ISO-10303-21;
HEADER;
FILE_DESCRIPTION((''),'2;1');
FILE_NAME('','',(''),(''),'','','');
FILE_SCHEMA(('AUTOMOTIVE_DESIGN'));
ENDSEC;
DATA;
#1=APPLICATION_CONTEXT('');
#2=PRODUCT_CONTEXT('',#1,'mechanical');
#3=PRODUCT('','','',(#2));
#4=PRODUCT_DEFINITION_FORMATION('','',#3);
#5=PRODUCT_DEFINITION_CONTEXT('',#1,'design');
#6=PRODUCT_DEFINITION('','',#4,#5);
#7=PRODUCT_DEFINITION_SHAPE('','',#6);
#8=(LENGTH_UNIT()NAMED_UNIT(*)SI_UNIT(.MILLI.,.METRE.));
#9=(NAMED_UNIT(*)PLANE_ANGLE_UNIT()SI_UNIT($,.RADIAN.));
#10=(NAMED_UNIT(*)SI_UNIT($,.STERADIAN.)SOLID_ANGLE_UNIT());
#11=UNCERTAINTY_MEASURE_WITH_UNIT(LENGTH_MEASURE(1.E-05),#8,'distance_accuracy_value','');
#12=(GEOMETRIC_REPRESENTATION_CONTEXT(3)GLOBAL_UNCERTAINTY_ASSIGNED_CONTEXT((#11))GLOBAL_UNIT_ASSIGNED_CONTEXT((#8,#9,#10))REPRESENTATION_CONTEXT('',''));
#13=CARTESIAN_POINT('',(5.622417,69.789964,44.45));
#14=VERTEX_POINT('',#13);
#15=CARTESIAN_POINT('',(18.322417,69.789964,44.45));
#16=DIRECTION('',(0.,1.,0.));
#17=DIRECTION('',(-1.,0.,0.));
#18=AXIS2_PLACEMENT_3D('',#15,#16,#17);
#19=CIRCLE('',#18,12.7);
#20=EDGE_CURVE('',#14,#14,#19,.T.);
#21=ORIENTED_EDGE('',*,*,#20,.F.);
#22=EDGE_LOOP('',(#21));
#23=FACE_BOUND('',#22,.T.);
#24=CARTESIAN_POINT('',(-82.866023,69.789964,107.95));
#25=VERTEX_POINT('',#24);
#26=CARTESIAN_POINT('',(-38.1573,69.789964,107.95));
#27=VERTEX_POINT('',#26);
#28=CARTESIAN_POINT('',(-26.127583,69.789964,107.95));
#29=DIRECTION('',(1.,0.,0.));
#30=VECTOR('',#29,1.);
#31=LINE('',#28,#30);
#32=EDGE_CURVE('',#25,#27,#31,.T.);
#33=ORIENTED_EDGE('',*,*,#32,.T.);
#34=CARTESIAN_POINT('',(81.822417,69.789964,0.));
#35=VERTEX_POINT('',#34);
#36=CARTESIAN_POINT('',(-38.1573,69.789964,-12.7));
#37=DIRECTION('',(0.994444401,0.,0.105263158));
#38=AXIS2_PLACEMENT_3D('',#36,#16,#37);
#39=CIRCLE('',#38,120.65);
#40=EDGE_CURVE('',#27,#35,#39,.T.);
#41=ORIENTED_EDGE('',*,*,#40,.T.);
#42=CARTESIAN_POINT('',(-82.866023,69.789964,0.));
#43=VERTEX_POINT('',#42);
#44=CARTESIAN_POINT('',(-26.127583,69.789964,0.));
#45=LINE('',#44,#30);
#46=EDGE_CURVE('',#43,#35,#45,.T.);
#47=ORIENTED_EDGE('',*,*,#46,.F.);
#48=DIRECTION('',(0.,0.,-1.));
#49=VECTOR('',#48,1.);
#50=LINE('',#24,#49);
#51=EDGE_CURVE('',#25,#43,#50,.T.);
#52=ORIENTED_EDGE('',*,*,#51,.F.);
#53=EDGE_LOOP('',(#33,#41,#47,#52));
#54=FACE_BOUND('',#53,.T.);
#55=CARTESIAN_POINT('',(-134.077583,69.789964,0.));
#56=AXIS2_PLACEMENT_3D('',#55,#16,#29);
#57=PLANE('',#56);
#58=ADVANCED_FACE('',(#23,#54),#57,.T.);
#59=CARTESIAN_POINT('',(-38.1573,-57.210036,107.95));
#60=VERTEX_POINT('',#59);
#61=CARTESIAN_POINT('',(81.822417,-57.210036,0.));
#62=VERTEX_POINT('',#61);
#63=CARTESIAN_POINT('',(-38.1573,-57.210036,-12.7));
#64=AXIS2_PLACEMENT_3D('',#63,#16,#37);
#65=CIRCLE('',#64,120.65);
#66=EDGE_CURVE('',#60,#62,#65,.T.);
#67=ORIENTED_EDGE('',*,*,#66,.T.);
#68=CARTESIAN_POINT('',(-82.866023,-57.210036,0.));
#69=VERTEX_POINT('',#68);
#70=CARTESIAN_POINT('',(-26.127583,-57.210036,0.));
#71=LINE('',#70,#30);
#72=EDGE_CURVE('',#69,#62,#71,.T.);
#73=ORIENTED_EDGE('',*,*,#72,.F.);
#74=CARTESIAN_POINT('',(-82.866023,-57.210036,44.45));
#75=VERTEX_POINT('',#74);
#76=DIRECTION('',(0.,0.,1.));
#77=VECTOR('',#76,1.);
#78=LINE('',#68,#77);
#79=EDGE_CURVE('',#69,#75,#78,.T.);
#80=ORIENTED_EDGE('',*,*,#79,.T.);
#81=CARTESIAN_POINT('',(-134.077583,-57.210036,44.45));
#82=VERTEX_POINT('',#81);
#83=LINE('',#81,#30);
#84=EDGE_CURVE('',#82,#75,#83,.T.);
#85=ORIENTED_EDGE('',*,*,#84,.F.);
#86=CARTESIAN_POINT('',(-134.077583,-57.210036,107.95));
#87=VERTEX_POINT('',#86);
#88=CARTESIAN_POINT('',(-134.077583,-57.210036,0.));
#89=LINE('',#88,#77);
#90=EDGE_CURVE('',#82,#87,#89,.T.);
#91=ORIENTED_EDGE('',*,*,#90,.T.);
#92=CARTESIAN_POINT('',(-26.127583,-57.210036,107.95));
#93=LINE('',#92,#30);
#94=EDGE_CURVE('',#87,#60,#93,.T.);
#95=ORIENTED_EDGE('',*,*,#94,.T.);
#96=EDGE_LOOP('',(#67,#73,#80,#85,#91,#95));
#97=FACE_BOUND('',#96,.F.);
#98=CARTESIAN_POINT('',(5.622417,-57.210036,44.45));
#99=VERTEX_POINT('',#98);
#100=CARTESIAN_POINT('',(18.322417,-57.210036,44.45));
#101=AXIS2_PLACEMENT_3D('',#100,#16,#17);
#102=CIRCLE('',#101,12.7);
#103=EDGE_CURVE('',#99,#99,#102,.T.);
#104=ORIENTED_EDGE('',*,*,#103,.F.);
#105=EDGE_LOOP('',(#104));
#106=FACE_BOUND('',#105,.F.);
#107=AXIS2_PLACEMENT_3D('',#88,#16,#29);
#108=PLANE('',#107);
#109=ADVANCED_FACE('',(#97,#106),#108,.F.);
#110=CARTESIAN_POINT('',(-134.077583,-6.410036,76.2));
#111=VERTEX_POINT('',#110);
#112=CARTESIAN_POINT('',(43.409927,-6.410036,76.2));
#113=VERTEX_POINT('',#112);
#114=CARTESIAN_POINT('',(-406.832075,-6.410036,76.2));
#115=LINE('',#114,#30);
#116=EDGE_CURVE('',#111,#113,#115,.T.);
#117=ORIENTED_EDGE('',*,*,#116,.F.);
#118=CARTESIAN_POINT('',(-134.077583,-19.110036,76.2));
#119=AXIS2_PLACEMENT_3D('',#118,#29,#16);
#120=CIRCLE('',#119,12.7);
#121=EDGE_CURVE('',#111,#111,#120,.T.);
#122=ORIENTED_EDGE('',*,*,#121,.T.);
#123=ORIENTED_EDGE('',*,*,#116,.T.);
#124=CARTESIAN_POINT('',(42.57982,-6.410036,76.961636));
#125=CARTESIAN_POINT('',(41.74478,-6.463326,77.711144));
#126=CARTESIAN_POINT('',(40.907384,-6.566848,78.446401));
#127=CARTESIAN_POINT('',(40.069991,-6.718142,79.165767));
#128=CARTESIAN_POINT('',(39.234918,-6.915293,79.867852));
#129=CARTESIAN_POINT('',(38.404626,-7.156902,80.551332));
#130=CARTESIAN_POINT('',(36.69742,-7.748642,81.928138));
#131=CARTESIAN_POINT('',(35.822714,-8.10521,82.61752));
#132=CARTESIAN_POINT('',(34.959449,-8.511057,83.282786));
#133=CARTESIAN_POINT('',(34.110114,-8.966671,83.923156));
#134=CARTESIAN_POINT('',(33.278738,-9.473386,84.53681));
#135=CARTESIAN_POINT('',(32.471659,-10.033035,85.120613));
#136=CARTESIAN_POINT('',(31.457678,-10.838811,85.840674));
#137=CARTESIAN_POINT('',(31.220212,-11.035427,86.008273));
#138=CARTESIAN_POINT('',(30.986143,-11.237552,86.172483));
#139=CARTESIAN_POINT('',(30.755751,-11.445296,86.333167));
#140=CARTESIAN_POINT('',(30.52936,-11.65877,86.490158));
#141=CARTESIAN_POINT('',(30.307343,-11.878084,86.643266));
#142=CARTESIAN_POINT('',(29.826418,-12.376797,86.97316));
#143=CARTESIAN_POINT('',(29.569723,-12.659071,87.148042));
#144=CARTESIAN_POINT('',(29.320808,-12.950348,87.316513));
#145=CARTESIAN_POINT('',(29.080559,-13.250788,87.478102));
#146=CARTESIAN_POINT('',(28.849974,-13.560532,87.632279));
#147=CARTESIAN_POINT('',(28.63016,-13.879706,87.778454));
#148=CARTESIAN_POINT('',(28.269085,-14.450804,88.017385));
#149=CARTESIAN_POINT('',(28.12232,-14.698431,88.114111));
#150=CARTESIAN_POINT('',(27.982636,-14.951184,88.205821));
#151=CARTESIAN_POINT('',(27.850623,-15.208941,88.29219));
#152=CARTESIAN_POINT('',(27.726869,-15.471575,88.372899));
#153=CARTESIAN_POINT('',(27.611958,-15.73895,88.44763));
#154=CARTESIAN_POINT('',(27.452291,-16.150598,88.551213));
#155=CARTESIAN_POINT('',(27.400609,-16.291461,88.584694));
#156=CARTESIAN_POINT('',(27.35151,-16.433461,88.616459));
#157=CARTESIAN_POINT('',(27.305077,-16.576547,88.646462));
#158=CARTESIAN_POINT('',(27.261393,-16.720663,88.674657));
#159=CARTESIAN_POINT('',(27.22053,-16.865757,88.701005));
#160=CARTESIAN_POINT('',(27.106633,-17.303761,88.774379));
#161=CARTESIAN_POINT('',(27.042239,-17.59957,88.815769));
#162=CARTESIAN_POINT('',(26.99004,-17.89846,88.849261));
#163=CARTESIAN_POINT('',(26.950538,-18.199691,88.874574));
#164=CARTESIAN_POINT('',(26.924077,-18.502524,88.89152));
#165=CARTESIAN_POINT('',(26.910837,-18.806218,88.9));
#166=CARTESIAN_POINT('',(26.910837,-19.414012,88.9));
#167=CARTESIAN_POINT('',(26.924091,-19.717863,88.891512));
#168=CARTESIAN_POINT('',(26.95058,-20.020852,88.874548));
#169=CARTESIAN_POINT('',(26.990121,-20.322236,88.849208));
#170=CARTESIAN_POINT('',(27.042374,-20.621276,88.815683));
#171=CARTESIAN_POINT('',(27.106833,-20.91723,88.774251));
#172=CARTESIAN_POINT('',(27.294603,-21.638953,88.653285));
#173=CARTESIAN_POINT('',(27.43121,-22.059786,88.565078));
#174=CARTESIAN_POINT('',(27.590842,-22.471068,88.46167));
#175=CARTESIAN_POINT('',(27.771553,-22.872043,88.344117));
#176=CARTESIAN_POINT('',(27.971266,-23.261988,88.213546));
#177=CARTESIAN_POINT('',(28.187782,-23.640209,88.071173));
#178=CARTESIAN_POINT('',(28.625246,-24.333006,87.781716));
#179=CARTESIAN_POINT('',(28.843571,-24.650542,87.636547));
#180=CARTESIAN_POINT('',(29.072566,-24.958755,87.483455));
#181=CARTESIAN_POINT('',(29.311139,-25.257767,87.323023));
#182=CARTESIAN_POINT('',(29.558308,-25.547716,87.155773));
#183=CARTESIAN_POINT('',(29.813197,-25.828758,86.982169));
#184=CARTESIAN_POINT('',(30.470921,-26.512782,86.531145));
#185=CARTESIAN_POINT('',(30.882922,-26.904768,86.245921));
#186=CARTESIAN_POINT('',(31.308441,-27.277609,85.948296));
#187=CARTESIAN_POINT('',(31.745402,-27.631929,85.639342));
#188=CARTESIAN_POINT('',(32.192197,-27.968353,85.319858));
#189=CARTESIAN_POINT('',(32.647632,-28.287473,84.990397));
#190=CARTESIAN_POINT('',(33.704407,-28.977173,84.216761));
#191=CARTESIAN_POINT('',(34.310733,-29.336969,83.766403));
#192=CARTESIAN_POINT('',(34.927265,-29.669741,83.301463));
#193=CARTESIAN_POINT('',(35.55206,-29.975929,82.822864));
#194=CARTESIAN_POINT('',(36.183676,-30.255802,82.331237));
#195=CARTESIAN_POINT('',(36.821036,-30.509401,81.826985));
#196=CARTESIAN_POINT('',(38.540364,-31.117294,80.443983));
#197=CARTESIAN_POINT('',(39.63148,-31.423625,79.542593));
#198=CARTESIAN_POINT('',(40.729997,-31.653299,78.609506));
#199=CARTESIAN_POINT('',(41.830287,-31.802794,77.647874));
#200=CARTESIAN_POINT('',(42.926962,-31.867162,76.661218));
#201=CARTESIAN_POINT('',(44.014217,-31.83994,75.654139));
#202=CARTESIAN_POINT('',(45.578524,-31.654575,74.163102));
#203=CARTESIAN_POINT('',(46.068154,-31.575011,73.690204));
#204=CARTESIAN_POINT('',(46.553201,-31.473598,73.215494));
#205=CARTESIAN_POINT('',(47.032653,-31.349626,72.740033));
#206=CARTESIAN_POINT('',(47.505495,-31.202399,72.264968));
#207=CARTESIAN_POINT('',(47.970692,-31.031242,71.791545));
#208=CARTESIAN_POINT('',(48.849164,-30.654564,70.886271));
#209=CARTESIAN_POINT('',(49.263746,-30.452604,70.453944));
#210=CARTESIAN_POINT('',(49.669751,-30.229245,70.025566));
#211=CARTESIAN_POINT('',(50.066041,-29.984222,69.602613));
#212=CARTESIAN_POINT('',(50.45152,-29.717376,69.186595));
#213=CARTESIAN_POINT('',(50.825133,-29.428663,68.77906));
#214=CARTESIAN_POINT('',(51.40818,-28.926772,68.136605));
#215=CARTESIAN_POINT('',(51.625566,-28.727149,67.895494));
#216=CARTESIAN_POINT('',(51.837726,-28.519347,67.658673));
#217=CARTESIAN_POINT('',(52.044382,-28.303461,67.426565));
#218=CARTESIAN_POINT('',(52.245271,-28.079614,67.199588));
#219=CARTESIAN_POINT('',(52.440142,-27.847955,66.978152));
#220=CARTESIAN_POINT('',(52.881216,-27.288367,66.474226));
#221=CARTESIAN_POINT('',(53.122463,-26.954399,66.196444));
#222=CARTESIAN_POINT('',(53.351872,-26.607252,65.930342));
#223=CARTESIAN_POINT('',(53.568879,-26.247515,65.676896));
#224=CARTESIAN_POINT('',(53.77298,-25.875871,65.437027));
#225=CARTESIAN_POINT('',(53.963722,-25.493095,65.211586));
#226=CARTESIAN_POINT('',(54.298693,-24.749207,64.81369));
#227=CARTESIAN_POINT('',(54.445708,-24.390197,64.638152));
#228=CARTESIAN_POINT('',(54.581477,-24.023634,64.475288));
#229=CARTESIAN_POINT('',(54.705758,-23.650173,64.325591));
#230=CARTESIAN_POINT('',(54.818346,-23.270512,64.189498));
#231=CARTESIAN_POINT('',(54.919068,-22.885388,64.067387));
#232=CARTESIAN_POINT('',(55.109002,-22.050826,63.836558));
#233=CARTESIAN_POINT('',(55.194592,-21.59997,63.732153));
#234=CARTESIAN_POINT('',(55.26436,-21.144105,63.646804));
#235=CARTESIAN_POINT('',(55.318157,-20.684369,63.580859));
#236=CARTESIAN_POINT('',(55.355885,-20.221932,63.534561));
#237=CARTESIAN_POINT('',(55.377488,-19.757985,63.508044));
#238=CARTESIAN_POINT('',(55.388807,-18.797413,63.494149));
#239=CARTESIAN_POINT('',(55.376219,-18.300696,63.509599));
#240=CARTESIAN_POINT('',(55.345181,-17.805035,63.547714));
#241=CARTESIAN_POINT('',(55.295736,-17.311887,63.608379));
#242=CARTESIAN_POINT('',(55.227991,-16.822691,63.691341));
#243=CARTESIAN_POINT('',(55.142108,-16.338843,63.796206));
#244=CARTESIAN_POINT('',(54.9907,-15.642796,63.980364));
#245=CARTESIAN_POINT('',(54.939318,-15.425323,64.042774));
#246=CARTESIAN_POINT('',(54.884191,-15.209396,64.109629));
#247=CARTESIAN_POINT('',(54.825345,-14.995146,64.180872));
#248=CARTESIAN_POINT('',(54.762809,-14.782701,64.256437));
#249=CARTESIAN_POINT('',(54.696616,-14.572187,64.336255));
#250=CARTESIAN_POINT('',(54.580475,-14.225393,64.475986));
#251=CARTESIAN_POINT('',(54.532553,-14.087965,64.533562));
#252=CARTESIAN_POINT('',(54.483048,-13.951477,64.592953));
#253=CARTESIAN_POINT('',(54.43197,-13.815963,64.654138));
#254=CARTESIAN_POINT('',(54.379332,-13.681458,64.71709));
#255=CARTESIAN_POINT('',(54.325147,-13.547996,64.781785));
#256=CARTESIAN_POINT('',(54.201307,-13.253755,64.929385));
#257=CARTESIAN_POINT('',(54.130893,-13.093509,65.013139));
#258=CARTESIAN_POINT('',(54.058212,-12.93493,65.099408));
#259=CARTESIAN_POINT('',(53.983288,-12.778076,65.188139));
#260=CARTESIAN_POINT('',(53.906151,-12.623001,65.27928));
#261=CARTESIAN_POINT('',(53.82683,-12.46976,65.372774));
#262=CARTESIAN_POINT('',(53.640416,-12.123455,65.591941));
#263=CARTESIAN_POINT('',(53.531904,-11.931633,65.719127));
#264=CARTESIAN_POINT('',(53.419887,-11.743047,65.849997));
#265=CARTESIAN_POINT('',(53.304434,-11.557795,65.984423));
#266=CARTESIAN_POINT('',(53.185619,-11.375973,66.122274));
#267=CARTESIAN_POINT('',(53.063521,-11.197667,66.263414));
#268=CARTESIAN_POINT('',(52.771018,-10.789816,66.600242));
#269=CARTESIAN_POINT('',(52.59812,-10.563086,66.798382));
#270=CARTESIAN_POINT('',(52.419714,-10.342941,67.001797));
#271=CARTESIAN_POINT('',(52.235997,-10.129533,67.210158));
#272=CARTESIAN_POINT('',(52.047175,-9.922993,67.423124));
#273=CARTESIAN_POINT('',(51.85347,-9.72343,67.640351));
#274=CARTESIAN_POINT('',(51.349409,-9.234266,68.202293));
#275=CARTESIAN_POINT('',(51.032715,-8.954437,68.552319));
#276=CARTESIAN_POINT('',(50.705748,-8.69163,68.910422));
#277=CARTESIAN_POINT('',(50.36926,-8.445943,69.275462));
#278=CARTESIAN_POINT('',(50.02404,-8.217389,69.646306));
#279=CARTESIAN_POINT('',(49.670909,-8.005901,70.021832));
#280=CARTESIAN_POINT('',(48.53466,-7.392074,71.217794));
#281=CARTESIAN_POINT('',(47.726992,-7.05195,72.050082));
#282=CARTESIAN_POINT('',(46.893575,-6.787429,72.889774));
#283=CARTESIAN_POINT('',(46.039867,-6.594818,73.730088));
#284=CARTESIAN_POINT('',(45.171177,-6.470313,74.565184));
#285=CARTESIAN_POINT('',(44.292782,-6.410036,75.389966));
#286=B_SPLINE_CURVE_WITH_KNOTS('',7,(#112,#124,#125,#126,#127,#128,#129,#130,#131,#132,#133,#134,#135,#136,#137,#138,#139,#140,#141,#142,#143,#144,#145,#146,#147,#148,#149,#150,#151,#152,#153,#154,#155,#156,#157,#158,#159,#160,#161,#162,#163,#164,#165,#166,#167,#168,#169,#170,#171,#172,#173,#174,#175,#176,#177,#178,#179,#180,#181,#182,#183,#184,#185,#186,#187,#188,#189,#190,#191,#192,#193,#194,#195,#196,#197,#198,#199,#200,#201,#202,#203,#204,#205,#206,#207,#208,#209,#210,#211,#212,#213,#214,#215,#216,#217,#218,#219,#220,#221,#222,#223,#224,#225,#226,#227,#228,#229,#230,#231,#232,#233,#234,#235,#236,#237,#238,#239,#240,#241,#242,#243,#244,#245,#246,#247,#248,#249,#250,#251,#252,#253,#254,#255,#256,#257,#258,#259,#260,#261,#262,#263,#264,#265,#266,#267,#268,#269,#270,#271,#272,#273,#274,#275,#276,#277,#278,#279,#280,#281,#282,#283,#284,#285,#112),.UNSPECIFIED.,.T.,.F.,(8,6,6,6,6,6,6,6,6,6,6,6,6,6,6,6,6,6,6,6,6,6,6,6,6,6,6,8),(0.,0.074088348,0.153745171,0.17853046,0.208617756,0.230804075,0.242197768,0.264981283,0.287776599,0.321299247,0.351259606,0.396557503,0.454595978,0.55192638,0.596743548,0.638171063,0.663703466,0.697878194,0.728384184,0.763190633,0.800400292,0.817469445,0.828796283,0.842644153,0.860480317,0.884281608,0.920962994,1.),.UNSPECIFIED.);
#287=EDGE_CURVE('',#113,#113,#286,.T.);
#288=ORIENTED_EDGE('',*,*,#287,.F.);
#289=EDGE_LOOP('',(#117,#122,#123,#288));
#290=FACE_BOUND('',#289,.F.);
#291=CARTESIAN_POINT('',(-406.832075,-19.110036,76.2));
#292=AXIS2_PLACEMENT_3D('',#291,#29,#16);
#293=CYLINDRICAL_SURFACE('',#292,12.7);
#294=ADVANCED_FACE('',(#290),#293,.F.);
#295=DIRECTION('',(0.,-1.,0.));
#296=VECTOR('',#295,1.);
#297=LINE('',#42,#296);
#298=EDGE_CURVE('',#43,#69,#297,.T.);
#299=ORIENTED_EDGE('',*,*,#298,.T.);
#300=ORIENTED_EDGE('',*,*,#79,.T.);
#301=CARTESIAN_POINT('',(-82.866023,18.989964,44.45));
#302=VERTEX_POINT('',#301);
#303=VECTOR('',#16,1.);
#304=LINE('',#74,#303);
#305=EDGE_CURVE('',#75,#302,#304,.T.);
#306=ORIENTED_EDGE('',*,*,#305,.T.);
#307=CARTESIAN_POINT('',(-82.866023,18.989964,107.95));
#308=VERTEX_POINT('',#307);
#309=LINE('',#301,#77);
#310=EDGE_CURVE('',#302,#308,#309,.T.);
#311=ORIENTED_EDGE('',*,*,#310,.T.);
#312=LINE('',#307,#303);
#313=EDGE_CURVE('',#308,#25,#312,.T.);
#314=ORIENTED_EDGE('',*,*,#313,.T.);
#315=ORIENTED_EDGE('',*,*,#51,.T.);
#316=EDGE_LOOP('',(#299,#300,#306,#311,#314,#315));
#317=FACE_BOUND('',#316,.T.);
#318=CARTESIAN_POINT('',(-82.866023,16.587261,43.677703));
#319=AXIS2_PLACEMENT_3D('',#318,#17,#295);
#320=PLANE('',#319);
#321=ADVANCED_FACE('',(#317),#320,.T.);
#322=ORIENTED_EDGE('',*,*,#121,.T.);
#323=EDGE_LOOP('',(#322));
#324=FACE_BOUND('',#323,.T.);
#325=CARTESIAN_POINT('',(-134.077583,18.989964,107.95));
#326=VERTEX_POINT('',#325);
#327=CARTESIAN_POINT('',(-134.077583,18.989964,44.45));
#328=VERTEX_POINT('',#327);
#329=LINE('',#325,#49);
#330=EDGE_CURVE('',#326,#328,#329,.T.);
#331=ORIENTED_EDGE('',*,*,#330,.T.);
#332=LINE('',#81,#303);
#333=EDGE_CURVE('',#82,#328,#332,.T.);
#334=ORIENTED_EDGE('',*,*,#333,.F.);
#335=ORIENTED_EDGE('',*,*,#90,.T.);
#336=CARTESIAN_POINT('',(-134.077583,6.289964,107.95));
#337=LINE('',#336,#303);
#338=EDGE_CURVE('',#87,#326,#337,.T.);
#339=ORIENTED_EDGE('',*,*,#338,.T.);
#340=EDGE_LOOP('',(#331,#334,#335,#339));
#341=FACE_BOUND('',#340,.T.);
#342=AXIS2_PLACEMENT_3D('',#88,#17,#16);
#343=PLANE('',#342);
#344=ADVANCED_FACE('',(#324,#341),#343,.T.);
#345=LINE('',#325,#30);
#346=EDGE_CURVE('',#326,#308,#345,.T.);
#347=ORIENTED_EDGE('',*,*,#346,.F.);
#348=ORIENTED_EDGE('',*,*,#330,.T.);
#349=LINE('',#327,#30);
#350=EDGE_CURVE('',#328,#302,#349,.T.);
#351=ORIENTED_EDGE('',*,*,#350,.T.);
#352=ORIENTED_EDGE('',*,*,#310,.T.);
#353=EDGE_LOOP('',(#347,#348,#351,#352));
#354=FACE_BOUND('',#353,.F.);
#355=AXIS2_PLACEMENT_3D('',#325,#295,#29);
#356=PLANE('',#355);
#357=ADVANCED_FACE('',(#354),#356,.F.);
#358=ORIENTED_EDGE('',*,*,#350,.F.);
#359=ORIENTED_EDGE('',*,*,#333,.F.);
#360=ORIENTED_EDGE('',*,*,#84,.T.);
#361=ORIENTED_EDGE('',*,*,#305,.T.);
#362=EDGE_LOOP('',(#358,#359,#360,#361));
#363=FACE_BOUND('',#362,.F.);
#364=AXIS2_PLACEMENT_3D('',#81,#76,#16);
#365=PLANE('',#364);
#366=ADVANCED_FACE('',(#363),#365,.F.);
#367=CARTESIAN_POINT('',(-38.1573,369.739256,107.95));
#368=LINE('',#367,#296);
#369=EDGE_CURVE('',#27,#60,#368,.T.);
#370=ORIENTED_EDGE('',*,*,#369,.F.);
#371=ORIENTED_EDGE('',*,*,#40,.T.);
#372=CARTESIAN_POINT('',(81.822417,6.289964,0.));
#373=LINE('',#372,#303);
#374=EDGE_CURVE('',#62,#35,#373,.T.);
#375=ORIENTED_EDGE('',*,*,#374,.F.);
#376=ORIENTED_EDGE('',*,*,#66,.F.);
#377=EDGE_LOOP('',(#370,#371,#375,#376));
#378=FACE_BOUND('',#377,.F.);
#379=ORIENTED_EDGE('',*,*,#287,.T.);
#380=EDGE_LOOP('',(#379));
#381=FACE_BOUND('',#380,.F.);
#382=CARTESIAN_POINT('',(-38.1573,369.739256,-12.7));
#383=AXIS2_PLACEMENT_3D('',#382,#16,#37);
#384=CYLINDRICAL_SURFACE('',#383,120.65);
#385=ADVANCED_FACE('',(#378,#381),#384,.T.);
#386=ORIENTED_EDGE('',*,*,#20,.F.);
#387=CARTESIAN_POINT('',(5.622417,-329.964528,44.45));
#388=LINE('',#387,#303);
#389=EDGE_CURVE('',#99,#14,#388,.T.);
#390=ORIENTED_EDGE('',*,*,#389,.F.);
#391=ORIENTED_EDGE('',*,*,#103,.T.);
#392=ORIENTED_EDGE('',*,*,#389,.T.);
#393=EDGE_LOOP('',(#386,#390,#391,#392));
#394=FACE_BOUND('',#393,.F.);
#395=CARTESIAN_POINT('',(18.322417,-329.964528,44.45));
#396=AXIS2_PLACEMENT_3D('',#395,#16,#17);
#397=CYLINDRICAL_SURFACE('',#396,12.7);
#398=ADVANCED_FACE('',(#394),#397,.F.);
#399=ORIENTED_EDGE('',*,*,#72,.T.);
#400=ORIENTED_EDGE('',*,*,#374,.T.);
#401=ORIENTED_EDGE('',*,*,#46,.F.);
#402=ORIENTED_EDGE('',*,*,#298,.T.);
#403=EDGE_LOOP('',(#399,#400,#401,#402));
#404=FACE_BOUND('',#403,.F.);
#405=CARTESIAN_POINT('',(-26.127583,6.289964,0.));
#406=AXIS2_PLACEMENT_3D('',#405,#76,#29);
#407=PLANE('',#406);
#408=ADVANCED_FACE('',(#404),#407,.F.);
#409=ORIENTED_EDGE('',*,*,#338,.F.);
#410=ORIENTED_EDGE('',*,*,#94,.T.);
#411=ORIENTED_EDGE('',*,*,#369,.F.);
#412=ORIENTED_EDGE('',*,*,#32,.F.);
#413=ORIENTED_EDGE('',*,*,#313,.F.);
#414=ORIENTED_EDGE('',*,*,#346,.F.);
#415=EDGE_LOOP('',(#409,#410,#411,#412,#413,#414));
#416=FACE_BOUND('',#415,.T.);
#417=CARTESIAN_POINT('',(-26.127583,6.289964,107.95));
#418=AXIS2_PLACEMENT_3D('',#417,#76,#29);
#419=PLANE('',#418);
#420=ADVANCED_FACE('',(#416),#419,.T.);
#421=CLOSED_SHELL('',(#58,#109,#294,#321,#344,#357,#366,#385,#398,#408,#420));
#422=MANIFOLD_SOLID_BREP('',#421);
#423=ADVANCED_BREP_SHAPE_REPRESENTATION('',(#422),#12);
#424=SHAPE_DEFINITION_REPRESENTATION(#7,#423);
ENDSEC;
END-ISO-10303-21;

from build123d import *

# Parameters (mm, degrees)
F0_W        = 215.9
F0_H        = 127
F1_DEPTH    = 107.95
F4_W        = 50.8
F4_H        = 50.8
F5_DEPTH    = 107.95
F6_DEPTH    = 51.21156
F7_T1_DEPTH = 726.8985851792
F9_D        = 25.4
F10_D       = 25.4


# Not quite as in the source:
# - a fillet or chamfer that OpenCascade refuses, or shapes differently, is made with other operations: its cross-section is extruded or revolved along the edge and cut away or added


with BuildPart() as f1:
    # F0 (on Top) → F1 (new body)
    with BuildSketch(Plane.XY):
        with Locations((-26.1275832451, 6.2899636105)):
            Rectangle(F0_W, F0_H)
    extrude(amount=F1_DEPTH)

    # F4 (on face) → F5 (cut)
    with BuildSketch(Plane.XY.offset(107.95)):
        with Locations((-108.6775832451, 44.3899636105)):
            Rectangle(F4_W, F4_H)
    extrude(amount=-F5_DEPTH, mode=Mode.SUBTRACT)

    # F2 (on face) → F6 (cut)
    with BuildSketch(Plane(origin=(-134.0775832451, 0, 0), x_dir=(0, -1, 0), z_dir=(-1, 0, 0))):
        Polygon((-18.9899636105, 44.45), (-18.9899636105, 107.95), (-69.7899636105, 107.95), (-69.7899636105, 0), (57.2100363895, 0), (57.2100363895, 44.45), align=None)
    extrude(amount=-F6_DEPTH, mode=Mode.SUBTRACT)

    # F7: fillet of radius 120.65 on 1 edges, made by hand

    # F7_s2 → F7_t1 (cut)
    with BuildSketch(Plane.XZ.offset(-369.7392562001)):
        with BuildLine():
            ThreePointArc((81.8224167549, 0), (42.5401826414, 76.9902377631), (-38.1573002809, 107.95))
            Line((-38.1573002809, 107.95), (81.8224167549, 107.95))
            Line((81.8224167549, 107.95), (81.8224167549, 0))
        make_face()
    extrude(amount=F7_T1_DEPTH, mode=Mode.SUBTRACT)

    # F9 (through all)
    with Locations(Plane.XZ.offset(57.2100363895)):
        with Locations((18.3224167549, 44.45)):
            Hole(F9_D / 2)

    # F10 (through all)
    with Locations(Plane(origin=(-134.0775832451, 0, 0), x_dir=(0, -1, 0), z_dir=(-1, 0, 0))):
        with Locations((19.1100363895, 76.2)):
            Hole(F10_D / 2)


solid = f1.part
